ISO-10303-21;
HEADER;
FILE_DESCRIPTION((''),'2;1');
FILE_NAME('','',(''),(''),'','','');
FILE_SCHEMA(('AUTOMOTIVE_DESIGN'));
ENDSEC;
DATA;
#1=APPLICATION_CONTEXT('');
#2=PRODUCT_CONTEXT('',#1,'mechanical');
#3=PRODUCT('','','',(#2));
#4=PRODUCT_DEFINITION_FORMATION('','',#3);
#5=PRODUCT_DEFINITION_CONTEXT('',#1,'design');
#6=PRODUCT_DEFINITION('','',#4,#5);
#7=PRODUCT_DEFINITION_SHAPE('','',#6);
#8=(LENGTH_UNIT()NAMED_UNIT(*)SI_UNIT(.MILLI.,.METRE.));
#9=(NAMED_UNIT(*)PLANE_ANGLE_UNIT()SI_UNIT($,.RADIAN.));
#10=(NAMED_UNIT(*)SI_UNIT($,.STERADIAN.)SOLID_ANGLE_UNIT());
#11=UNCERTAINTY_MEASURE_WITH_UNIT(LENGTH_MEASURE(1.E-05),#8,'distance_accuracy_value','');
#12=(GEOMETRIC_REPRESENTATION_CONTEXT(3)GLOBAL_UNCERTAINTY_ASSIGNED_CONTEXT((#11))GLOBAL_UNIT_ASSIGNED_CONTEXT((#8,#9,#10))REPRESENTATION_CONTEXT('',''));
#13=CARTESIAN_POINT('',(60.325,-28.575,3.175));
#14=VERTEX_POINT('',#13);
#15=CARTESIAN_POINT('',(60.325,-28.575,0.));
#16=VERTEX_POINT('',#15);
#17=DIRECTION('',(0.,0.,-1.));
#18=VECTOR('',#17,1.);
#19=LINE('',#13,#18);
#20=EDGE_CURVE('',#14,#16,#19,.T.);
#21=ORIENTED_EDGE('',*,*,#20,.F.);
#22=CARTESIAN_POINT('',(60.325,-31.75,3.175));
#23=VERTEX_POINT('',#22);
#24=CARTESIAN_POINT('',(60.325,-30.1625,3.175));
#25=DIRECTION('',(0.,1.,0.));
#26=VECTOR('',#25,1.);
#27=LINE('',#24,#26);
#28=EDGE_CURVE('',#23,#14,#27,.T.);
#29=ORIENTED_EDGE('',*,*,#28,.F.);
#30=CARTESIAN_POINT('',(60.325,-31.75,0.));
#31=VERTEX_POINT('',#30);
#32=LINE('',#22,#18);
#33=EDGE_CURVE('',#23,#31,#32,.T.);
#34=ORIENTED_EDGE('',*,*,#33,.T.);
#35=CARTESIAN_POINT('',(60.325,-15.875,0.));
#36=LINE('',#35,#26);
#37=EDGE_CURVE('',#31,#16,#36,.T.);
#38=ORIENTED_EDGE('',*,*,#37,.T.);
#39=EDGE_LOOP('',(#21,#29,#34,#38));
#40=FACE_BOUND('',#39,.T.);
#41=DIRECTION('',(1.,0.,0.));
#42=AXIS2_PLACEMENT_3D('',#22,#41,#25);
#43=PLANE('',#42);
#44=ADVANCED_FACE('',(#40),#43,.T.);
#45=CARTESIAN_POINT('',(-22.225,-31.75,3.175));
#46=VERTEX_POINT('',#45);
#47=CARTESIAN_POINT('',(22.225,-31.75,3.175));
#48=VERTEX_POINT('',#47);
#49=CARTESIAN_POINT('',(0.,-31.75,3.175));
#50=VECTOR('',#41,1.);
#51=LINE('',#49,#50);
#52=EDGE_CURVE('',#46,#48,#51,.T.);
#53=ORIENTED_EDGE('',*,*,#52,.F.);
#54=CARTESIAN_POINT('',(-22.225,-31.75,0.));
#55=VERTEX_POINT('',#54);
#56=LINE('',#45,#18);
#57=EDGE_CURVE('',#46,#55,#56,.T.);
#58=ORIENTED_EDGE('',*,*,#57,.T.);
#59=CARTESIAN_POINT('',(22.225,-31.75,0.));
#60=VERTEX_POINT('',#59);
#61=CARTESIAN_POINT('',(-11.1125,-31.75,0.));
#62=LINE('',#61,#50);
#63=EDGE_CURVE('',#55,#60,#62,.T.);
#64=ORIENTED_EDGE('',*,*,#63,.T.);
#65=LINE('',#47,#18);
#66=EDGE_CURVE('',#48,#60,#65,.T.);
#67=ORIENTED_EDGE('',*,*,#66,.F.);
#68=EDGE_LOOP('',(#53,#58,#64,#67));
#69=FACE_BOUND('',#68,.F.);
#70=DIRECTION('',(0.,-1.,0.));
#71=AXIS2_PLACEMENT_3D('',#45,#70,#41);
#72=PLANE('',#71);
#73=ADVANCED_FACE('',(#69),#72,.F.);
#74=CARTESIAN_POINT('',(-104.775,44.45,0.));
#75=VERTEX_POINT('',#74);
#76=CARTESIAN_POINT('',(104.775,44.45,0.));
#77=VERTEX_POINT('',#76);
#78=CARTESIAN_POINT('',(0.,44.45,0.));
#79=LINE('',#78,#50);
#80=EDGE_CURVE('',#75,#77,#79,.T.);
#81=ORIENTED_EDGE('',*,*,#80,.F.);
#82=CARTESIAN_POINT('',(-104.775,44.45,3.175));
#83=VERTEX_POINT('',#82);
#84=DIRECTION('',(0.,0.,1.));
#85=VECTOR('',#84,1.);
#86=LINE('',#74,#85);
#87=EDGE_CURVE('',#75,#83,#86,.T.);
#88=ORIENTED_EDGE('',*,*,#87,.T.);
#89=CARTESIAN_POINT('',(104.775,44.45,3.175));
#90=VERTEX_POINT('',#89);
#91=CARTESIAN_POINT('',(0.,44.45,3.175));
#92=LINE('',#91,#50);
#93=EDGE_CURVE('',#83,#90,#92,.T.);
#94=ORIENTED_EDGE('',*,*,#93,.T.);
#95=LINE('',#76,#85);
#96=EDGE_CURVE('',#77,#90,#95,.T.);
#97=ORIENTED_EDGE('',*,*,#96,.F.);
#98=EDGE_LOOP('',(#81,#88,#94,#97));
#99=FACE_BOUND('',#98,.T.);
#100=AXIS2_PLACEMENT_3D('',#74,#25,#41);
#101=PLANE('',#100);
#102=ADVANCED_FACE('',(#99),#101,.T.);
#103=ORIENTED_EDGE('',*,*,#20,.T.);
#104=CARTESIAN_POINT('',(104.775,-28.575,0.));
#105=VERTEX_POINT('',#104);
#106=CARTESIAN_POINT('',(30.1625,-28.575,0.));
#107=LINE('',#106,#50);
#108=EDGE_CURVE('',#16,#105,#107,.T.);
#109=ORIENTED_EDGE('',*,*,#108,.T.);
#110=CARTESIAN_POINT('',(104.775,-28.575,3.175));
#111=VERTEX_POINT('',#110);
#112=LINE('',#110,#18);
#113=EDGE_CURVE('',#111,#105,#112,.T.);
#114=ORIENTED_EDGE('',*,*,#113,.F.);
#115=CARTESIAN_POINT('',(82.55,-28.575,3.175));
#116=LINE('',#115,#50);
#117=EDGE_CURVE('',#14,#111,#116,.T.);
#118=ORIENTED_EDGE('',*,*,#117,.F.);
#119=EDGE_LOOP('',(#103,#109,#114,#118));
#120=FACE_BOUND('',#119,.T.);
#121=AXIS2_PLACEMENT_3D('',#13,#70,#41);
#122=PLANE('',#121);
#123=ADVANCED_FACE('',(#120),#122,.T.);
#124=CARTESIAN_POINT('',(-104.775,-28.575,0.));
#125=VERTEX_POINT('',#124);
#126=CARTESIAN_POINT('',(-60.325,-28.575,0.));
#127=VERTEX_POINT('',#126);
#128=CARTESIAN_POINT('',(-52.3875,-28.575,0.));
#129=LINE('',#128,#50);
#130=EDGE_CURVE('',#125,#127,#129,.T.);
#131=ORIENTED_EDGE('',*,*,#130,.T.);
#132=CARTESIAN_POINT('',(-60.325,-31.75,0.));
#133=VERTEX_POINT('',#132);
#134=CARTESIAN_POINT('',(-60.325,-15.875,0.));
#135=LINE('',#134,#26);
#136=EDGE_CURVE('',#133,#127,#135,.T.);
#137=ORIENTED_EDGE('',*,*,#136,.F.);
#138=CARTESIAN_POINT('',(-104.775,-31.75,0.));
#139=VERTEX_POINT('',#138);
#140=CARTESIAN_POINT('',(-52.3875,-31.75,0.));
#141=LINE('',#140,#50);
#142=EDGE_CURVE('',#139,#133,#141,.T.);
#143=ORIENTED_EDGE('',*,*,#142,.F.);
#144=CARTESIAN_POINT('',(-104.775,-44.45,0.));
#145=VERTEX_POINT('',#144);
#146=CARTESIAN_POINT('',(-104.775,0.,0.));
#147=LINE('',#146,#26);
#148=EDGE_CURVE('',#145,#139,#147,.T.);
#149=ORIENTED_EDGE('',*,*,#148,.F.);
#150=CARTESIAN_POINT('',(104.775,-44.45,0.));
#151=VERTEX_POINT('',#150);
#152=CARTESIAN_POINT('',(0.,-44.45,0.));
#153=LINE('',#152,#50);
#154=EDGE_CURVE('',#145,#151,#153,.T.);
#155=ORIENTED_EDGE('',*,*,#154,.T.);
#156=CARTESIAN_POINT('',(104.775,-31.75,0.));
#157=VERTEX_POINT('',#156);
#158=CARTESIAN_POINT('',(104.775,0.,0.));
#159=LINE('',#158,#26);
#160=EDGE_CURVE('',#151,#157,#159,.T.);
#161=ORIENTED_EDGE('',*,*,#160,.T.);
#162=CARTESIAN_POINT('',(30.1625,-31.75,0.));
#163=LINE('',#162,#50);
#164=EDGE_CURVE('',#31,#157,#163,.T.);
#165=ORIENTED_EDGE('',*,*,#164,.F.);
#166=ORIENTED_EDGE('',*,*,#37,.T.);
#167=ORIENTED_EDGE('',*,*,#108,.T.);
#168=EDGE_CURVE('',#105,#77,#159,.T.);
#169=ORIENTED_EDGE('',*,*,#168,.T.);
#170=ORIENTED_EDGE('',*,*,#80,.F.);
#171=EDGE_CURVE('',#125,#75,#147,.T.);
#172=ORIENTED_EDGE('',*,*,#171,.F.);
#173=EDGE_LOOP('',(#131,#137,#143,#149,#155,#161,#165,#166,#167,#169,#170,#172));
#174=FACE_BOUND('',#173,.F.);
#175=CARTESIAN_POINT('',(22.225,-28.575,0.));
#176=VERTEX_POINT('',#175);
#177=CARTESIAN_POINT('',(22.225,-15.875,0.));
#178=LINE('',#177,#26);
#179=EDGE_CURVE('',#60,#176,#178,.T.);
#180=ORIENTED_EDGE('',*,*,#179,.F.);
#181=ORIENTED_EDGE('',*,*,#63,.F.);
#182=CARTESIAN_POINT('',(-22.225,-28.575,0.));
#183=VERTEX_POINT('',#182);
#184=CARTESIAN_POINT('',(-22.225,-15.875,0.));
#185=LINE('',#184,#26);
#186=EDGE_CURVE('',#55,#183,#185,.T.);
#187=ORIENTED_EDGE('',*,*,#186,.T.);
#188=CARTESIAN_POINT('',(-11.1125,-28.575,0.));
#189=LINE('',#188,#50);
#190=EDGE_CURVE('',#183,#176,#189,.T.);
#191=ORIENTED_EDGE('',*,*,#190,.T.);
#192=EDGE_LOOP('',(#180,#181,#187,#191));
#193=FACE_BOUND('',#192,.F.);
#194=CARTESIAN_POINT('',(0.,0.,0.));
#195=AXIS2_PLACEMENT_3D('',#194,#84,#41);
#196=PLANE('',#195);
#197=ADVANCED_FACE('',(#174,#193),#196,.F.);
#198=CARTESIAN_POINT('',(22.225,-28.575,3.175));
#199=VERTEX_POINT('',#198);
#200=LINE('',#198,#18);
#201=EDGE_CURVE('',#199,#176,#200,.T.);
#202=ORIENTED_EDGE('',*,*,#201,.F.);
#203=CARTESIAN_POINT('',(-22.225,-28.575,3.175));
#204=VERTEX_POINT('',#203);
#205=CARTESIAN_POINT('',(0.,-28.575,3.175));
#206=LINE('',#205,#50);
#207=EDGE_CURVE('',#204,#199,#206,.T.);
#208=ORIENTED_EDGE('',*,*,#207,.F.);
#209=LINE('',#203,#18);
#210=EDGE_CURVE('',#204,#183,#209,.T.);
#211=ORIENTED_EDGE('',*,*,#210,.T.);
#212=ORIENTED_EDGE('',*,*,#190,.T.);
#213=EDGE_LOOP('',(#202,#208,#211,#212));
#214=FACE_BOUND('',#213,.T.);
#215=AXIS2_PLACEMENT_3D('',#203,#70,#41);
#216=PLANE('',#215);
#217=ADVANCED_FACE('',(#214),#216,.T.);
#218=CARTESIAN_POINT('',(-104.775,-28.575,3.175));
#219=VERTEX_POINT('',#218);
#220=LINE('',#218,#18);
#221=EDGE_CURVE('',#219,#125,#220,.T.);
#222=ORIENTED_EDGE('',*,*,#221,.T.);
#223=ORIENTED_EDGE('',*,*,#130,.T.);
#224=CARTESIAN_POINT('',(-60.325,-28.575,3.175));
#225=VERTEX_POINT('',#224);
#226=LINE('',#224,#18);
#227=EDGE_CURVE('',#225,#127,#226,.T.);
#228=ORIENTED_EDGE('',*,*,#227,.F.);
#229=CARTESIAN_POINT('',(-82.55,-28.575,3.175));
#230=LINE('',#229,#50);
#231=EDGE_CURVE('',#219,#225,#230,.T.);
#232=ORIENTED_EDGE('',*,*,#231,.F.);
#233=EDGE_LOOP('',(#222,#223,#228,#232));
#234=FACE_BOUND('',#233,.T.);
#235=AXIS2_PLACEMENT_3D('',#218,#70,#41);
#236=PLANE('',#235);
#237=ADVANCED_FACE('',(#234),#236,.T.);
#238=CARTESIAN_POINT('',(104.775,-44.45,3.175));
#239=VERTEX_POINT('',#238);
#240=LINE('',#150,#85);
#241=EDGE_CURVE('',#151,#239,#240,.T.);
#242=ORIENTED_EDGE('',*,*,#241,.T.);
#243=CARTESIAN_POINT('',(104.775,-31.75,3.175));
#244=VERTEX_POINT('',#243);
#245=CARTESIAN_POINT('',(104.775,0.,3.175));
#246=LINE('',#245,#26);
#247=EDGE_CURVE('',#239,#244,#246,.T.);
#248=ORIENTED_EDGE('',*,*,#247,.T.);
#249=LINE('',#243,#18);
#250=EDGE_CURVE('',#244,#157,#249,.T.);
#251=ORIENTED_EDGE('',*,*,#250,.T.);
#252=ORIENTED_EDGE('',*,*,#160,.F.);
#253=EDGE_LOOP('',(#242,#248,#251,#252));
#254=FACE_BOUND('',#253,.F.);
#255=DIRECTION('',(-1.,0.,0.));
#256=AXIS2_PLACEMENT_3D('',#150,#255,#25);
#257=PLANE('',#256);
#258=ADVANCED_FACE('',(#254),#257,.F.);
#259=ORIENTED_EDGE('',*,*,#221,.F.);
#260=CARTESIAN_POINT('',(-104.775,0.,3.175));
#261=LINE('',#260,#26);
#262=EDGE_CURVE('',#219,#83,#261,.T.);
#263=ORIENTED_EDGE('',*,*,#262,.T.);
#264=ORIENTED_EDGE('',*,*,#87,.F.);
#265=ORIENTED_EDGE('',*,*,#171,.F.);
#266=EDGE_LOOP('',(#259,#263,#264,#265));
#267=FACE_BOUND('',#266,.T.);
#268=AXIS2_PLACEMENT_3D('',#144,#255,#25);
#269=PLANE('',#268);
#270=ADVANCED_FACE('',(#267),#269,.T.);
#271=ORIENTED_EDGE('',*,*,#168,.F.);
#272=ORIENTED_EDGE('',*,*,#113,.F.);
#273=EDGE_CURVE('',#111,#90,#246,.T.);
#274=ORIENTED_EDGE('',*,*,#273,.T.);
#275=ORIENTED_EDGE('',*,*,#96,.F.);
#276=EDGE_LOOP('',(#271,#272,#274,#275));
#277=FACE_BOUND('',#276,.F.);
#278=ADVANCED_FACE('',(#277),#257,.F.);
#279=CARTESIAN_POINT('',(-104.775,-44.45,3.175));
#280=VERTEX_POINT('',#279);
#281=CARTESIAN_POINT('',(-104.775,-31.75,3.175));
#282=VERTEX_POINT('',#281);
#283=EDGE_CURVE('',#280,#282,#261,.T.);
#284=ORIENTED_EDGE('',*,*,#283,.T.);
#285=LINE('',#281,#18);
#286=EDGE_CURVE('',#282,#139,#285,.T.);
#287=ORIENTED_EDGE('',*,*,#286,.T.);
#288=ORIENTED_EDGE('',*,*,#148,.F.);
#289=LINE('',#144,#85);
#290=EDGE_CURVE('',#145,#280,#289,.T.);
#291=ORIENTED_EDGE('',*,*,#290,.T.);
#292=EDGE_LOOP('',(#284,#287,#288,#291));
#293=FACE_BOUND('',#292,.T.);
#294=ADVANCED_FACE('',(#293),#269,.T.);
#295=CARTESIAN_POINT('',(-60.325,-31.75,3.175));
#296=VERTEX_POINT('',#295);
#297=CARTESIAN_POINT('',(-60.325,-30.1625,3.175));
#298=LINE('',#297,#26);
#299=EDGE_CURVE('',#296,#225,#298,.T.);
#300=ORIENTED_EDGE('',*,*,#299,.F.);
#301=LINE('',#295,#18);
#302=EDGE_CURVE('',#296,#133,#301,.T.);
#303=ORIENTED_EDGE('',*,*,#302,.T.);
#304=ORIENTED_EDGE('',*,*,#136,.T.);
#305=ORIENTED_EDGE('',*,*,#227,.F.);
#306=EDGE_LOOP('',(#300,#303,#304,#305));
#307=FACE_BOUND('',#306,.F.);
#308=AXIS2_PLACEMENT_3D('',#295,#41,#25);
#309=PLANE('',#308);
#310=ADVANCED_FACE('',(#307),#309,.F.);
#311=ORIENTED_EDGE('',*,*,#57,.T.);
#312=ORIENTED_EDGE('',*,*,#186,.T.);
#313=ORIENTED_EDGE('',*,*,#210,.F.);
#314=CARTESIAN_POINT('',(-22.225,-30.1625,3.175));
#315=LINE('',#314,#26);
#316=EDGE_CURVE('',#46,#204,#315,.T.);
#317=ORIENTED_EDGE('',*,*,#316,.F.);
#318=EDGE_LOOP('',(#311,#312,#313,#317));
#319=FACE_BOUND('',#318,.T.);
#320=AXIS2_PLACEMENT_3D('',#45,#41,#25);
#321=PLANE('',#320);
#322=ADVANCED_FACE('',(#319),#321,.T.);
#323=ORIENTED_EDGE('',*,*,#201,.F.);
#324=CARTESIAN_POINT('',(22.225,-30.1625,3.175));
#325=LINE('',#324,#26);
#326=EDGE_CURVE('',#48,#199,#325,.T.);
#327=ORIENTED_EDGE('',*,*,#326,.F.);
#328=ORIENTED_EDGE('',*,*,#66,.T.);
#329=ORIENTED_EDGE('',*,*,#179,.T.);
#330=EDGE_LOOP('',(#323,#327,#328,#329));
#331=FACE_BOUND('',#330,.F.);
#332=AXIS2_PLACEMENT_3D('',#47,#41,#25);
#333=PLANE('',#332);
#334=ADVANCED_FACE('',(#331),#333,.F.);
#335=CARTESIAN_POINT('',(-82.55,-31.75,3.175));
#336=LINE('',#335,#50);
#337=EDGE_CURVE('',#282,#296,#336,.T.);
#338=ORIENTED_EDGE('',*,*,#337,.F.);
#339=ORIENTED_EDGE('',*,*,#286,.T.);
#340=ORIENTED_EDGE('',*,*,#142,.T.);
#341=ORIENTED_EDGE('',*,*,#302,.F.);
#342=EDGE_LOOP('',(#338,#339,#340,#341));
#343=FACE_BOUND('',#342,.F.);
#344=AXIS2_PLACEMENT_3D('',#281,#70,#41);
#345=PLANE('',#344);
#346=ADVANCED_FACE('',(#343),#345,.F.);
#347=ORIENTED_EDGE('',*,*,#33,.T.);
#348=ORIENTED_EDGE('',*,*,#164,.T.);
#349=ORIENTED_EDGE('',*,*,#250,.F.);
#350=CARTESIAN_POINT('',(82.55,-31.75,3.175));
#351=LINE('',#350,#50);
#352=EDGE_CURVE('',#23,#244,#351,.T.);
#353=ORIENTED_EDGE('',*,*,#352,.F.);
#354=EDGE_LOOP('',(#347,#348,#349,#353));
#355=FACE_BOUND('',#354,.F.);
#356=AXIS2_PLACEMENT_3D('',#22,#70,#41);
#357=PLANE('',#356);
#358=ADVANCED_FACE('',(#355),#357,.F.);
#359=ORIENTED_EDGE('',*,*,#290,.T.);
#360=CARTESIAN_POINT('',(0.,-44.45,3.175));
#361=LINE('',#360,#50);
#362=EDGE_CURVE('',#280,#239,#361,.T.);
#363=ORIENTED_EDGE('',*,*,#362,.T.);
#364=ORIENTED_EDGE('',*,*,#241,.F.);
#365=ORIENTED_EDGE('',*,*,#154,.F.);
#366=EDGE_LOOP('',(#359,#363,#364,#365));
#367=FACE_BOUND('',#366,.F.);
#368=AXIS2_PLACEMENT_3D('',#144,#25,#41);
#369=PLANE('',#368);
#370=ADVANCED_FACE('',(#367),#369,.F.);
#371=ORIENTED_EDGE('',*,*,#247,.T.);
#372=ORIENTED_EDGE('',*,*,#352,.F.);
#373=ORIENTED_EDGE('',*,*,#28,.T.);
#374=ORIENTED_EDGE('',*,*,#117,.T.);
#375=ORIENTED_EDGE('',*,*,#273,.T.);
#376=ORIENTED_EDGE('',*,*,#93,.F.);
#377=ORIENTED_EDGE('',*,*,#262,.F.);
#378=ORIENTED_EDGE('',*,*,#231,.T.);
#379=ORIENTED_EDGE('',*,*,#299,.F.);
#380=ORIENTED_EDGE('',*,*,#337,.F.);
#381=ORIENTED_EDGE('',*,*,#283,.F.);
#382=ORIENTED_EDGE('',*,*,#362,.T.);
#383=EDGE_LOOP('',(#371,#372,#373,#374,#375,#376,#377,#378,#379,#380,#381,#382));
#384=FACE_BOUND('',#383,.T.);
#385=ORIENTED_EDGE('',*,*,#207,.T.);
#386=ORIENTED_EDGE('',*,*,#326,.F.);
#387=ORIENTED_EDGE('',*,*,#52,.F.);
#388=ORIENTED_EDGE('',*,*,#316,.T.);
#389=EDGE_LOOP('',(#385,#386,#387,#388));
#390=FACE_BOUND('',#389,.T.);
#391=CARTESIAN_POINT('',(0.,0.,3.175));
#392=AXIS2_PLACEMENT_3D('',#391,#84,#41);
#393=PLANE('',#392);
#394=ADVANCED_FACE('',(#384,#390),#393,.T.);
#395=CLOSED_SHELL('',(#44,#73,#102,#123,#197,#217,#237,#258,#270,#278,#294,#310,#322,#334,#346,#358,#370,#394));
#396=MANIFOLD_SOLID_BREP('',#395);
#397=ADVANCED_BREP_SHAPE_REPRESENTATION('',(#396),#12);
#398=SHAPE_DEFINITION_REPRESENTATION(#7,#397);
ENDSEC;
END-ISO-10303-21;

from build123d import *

# Parameters (mm, degrees)
F0_W     = 209.55
F0_H     = 88.9
F1_DEPTH = 3.175
F2_W     = 44.45
F2_H     = 3.175
F3_DEPTH = 25.4


# Not quite as in the source:
# - a length typed as a fraction of an inch, garbled in the dataset ("3 / 203.2 mm" for 3/8 in), is restored


with BuildPart() as f1:
    # F0 (on Top) → F1 (new body)
    with BuildSketch(Plane.XY):
        Rectangle(F0_W, F0_H)
    extrude(amount=F1_DEPTH)

    # F2 (on face) → F3 (cut)
    with BuildSketch(Plane.XY.offset(3.175)):
        with Locations((-82.55, -30.1625)):
            Rectangle(F2_W, F2_H)
        with Locations((82.55, -30.1625)):
            Rectangle(F2_W, F2_H)
        with Locations((0, -30.1625)):
            Rectangle(F2_W, F2_H)
    extrude(amount=-F3_DEPTH, mode=Mode.SUBTRACT)


solid = f1.part
